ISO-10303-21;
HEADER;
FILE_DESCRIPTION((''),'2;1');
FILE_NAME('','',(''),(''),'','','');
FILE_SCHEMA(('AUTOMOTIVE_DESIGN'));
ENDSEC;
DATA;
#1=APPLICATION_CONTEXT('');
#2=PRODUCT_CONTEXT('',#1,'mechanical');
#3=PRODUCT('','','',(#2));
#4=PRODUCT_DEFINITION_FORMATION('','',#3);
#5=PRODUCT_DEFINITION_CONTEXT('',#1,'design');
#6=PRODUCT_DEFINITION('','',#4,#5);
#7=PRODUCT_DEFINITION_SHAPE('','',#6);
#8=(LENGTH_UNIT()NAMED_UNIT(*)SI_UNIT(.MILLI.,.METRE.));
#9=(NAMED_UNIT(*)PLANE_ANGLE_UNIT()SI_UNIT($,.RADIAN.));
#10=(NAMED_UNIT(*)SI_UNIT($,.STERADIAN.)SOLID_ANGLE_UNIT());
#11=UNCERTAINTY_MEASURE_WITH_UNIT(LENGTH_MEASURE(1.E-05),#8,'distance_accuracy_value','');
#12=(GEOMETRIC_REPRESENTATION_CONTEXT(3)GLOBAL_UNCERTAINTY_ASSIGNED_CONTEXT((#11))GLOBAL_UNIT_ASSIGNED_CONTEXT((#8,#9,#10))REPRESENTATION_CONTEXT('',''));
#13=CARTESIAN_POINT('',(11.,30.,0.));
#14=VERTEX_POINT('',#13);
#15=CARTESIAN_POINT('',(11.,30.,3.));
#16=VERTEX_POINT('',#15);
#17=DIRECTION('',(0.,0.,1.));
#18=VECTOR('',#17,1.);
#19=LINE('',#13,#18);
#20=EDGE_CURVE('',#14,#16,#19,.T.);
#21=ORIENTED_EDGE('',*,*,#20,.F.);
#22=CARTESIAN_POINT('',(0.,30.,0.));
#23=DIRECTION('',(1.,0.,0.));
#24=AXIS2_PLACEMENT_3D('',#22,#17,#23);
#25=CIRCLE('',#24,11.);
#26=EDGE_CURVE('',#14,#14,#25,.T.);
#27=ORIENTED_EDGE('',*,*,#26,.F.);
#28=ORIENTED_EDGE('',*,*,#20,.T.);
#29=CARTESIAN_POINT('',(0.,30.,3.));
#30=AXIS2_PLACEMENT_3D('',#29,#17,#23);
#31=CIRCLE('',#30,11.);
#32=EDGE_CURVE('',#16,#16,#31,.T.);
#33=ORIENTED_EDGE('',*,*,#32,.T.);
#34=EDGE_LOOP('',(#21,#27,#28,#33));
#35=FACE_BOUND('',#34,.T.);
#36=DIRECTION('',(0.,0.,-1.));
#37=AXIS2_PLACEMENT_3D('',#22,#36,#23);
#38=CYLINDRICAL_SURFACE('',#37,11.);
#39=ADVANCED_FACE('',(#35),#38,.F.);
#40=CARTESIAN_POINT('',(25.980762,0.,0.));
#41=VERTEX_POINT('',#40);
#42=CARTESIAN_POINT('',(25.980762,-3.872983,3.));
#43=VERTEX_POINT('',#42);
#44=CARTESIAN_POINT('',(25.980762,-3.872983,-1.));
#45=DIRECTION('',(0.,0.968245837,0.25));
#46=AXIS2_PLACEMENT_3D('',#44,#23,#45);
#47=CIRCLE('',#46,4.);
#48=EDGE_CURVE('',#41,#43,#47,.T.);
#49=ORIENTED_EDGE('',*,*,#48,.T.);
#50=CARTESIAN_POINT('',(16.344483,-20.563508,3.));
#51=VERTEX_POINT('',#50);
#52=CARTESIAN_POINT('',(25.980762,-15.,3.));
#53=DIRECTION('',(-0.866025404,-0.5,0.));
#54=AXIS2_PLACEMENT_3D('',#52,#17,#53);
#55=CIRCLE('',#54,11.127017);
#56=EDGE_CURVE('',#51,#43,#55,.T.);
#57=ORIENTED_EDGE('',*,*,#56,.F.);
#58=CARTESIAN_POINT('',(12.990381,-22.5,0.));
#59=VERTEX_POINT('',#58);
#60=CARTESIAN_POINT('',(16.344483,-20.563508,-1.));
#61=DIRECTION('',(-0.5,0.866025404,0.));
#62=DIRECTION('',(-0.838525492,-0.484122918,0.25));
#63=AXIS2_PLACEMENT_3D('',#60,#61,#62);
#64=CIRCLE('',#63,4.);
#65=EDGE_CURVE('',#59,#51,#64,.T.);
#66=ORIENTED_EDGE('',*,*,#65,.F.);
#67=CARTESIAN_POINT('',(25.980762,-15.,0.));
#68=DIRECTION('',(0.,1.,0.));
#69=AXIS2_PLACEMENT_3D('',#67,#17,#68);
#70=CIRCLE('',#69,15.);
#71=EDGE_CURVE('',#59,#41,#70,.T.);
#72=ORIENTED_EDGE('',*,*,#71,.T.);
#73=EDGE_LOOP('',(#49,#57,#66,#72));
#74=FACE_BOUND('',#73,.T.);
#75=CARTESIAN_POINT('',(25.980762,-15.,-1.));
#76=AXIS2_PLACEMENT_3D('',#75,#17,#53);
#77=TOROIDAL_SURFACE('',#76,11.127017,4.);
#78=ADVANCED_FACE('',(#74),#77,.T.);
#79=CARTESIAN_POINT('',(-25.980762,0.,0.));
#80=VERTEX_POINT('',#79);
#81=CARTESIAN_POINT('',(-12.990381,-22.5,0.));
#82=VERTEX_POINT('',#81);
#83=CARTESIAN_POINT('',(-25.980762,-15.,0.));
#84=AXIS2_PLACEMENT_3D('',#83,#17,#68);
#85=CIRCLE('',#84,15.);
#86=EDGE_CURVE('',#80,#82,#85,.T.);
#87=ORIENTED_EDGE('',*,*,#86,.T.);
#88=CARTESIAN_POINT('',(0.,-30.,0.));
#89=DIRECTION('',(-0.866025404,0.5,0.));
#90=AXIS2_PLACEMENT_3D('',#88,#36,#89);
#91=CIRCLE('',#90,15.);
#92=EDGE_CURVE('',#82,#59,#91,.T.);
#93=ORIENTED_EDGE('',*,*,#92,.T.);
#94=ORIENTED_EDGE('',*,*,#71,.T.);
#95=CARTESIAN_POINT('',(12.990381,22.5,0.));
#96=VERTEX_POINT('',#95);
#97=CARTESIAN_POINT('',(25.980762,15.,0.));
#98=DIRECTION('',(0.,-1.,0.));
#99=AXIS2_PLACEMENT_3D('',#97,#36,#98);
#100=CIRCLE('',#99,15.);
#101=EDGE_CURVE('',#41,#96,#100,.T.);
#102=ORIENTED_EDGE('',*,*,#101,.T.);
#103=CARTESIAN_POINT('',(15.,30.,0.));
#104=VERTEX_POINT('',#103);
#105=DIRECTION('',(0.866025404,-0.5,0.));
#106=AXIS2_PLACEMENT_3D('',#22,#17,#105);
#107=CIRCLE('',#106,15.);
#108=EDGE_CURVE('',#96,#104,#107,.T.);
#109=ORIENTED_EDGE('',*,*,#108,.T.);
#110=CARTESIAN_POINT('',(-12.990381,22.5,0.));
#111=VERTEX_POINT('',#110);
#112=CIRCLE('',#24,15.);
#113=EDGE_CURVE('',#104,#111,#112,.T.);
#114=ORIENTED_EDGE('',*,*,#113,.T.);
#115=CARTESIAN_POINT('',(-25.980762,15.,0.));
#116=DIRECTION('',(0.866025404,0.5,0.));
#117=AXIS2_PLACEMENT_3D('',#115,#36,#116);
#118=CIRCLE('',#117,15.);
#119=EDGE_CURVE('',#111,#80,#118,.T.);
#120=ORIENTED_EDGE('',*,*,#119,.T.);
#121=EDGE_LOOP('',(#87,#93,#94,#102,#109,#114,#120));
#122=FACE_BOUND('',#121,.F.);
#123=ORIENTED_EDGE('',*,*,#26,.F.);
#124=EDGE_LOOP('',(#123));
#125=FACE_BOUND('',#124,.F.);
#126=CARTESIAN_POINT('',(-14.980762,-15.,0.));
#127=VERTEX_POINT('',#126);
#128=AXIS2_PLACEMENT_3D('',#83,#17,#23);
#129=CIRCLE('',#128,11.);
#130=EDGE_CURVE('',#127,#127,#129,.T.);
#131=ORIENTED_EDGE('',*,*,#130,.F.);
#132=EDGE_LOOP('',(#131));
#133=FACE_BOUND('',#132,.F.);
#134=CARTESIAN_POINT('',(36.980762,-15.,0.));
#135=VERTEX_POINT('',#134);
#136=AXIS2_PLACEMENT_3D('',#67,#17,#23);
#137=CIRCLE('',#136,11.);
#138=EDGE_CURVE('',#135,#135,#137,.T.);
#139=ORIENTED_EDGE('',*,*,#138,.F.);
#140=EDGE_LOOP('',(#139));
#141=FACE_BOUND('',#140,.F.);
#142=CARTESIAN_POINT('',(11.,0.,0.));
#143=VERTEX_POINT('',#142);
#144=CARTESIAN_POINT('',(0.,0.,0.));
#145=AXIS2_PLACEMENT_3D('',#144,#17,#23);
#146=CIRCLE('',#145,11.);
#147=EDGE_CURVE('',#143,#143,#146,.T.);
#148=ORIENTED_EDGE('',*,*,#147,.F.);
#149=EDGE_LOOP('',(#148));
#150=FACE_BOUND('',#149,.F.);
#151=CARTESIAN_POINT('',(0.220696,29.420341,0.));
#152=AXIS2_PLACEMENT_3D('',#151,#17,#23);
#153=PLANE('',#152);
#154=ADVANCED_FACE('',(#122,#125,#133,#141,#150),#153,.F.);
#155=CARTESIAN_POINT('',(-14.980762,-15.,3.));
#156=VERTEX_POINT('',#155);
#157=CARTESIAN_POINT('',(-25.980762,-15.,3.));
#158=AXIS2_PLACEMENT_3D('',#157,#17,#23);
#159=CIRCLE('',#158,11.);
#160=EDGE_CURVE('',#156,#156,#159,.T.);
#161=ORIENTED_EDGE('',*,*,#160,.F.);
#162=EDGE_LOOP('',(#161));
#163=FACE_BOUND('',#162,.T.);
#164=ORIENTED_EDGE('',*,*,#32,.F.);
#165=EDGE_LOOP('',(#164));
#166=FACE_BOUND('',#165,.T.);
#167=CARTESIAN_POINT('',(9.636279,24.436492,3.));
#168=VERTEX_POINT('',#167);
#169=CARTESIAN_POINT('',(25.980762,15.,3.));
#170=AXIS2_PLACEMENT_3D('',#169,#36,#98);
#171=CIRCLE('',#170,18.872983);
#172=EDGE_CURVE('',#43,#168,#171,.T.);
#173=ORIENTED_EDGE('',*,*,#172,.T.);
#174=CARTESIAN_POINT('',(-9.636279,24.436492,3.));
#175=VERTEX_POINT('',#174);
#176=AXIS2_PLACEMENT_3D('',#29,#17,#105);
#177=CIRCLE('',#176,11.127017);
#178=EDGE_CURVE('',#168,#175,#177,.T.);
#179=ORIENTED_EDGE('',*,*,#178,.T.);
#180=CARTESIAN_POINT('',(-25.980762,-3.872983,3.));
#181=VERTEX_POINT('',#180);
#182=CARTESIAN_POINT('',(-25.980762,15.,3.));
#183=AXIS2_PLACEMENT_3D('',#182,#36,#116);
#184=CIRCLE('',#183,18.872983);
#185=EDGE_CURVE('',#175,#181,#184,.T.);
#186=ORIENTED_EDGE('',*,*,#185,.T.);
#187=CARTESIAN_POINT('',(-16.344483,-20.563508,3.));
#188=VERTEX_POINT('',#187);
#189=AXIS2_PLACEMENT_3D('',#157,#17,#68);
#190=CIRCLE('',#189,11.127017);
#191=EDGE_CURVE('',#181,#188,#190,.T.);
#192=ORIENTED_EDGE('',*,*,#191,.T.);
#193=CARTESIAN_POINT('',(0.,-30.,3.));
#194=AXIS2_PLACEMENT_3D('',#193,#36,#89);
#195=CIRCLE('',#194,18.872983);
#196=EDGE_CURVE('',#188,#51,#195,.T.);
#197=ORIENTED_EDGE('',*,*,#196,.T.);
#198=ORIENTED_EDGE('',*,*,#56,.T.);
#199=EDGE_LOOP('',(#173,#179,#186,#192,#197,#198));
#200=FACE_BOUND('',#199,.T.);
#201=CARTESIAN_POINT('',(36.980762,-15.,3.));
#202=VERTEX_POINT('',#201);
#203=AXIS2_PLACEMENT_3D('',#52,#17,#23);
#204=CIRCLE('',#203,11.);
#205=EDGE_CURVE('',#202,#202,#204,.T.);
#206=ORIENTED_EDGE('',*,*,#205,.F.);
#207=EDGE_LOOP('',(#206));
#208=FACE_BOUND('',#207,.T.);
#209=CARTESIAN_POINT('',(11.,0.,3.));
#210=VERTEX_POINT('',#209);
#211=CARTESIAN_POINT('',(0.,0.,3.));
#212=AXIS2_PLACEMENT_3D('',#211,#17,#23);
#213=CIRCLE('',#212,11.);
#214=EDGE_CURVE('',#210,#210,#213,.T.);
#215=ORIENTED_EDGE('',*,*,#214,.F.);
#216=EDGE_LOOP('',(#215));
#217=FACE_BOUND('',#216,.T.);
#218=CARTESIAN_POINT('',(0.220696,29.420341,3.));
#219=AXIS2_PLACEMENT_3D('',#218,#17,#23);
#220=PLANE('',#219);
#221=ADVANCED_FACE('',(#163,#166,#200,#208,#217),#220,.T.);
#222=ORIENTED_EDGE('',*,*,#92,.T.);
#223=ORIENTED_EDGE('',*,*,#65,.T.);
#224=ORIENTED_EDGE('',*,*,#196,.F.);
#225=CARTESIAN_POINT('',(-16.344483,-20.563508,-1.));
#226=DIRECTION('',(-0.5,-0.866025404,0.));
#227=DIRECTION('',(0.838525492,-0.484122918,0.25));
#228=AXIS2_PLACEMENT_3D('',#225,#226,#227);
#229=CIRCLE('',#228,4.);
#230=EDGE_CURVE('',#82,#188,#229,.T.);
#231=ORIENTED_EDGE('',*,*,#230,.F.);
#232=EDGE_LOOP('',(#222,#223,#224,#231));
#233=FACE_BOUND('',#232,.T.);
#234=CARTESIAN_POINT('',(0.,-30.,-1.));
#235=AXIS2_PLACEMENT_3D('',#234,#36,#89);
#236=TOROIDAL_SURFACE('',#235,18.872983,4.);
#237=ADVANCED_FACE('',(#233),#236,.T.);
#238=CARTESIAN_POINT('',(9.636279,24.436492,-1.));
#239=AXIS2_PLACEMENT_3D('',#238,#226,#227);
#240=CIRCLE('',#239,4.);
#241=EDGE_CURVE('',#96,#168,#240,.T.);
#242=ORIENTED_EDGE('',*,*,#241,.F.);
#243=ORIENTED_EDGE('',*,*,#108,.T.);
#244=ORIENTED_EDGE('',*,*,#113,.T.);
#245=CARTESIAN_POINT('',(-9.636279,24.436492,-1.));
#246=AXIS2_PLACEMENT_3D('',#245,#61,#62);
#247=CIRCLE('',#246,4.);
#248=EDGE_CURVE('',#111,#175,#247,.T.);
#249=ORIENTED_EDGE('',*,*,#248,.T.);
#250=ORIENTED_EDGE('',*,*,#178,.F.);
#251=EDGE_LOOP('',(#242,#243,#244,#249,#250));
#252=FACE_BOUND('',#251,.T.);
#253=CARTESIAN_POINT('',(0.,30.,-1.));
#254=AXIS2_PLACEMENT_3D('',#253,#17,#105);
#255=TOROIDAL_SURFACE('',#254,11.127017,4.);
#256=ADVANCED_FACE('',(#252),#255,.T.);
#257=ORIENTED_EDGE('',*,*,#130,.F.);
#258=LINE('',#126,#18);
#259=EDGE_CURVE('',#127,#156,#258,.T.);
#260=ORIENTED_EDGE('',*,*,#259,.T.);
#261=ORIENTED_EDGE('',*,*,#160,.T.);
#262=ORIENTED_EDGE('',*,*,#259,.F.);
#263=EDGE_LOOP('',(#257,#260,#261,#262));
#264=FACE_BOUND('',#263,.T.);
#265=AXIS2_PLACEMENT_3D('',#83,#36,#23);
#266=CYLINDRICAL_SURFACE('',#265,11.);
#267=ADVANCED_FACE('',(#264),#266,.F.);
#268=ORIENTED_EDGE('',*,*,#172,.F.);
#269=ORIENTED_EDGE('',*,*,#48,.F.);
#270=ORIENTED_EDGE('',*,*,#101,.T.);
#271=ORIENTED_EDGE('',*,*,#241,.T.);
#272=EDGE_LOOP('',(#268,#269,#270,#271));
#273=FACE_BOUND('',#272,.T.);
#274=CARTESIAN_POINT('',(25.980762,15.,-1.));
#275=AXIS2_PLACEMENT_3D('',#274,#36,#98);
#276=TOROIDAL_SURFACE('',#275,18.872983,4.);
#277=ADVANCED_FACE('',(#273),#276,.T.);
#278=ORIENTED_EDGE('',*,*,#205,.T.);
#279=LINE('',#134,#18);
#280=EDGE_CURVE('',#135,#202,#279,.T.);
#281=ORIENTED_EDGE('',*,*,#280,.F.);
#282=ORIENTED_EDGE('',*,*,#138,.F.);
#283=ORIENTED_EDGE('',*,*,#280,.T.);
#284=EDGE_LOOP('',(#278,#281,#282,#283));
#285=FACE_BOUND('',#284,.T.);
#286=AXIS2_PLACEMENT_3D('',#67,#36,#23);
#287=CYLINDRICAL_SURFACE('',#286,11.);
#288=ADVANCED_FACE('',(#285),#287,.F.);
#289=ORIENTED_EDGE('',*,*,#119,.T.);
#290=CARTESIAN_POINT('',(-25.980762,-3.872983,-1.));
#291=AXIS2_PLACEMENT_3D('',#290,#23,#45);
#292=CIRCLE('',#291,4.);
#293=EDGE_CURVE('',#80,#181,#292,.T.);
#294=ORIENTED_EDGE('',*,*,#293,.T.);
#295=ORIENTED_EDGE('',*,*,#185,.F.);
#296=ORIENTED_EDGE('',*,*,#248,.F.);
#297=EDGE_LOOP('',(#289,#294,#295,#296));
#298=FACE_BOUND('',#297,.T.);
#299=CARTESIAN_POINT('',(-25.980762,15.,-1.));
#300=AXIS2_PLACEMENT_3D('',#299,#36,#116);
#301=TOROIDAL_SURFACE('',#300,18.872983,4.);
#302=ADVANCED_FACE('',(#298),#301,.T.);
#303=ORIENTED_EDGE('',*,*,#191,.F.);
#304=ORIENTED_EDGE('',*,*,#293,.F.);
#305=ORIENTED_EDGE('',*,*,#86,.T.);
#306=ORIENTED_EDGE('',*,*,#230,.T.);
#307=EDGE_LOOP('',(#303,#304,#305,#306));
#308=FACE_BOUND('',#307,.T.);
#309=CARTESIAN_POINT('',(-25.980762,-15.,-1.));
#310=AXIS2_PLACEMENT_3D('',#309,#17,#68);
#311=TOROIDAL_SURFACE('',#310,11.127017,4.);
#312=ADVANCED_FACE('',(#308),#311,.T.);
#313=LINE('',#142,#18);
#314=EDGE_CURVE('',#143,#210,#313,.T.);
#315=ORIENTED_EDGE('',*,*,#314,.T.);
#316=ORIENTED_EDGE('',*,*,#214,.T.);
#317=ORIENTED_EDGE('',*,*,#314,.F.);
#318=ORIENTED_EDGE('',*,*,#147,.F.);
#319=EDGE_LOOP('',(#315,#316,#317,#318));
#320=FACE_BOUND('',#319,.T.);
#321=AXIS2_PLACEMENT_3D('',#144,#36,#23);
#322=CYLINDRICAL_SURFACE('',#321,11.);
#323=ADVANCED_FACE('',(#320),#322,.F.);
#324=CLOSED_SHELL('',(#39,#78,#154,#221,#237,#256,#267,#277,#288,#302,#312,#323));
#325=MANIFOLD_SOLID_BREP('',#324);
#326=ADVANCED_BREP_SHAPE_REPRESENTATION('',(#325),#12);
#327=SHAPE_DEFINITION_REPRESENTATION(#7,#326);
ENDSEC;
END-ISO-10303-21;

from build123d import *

# Parameters (mm, degrees)
F0_R         = 11
F1_DEPTH     = 3
F2_T2_ANGLE  = 120
F2_T4_ANGLE  = 240
F2_T6_ANGLE  = 240
F2_T8_ANGLE  = 120
F2_T10_ANGLE = 240
F2_T12_ANGLE = 120


# Not quite as in the source:
# - a fillet or chamfer that OpenCascade refuses, or shapes differently, is made with other operations: its cross-section is extruded or revolved along the edge and cut away or added


with BuildPart() as f1:
    # F0 (on Top) → F1 (new body)
    with BuildSketch(Plane.XY):
        with BuildLine():
            ThreePointArc((12.9903810568, 22.5), (14.4888873943, 26.1177143235), (15, 30))
            ThreePointArc((15, 30), (-3.8822856765, 44.4888873943), (-12.9903810568, 22.5))
            ThreePointArc((-12.9903810568, 22.5), (0, 15), (12.9903810568, 22.5))
        make_face()
        with Locations((0, 30)):
            Circle(F0_R, mode=Mode.SUBTRACT)
        with BuildLine():
            ThreePointArc((12.9903810568, 22.5), (0, 15), (-12.9903810568, 22.5))
            ThreePointArc((-12.9903810568, 22.5), (-12.9903810568, 7.5), (-25.9807621135, 0))
            ThreePointArc((-25.9807621135, 0), (-15.3741603957, -4.3933982822), (-10.9807621135, -15))
            ThreePointArc((-10.9807621135, -15), (-11.4918747192, -18.8822856765), (-12.9903810568, -22.5))
            ThreePointArc((-12.9903810568, -22.5), (0, -15), (12.9903810568, -22.5))
            ThreePointArc((12.9903810568, -22.5), (12.9903810568, -7.5), (25.9807621135, 0))
            ThreePointArc((25.9807621135, 0), (12.9903810568, 7.5), (12.9903810568, 22.5))
        make_face()
        Circle(F0_R, mode=Mode.SUBTRACT)
        with BuildLine():
            ThreePointArc((-10.9807621135, -15), (-15.3741603957, -4.3933982822), (-25.9807621135, 0))
            ThreePointArc((-25.9807621135, 0), (-38.9711431703, -22.5), (-12.9903810568, -22.5))
            ThreePointArc((-12.9903810568, -22.5), (-11.4918747192, -18.8822856765), (-10.9807621135, -15))
        make_face()
        with Locations((-25.9807621135, -15)):
            Circle(F0_R, mode=Mode.SUBTRACT)
        with BuildLine():
            ThreePointArc((40.9807621135, -15), (36.5873638313, -4.3933982822), (25.9807621135, 0))
            ThreePointArc((25.9807621135, 0), (12.9903810568, -7.5), (12.9903810568, -22.5))
            ThreePointArc((12.9903810568, -22.5), (29.8630477901, -29.4888873943), (40.9807621135, -15))
        make_face()
        with Locations((25.9807621135, -15)):
            Circle(F0_R, mode=Mode.SUBTRACT)
    extrude(amount=F1_DEPTH)

    # F2: fillet of radius 4 on 1 edges, made by hand

    # F2_s1 → F2_t2 (revolve, cut)
    with BuildSketch(Plane(origin=(-12.9903810568, 22.5, 0), x_dir=(0, 0, 1), z_dir=(-0.5, 0.8660254038, 0))):
        with BuildLine():
            ThreePointArc((0, 0), (2.1622776602, 1.4234936034), (3, 3.8729833462))
            Line((3, 3.8729833462), (3, 0))
            Line((3, 0), (0, 0))
        make_face()
    revolve(axis=Axis((-25.9807621135, 15, 3), (0, 0, -1)), revolution_arc=F2_T2_ANGLE, mode=Mode.SUBTRACT)

    # F2_s3 → F2_t4 (revolve, cut)
    with BuildSketch(Plane(origin=(12.9903810568, 22.5, 0), x_dir=(0, 0, 1), z_dir=(-0.5, -0.8660254038, 0))):
        with BuildLine():
            ThreePointArc((0, 0), (2.1622776602, 1.4234936034), (3, 3.8729833462))
            Line((3, 3.8729833462), (3, 0))
            Line((3, 0), (0, 0))
        make_face()
    revolve(axis=Axis((0, 30, 3), (0, 0, 1)), revolution_arc=F2_T4_ANGLE, mode=Mode.SUBTRACT)

    # F2_s5 → F2_t6 (revolve, cut)
    with BuildSketch(Plane.YZ.offset(-25.9807621135)):
        with BuildLine():
            ThreePointArc((0, 0), (-1.4234936034, 2.1622776602), (-3.8729833462, 3))
            Line((-3.8729833462, 3), (0, 3))
            Line((0, 3), (0, 0))
        make_face()
    revolve(axis=Axis((-25.9807621135, -15, 3), (0, 0, 1)), revolution_arc=F2_T6_ANGLE, mode=Mode.SUBTRACT)

    # F2_s7 → F2_t8 (revolve, cut)
    with BuildSketch(Plane(origin=(-12.9903810568, -22.5, 0), x_dir=(0, 0, 1), z_dir=(-0.5, -0.8660254038, 0))):
        with BuildLine():
            ThreePointArc((0, 0), (2.1622776602, 1.4234936034), (3, 3.8729833462))
            Line((3, 3.8729833462), (3, 0))
            Line((3, 0), (0, 0))
        make_face()
    revolve(axis=Axis((0, -30, 3), (0, 0, -1)), revolution_arc=F2_T8_ANGLE, mode=Mode.SUBTRACT)

    # F2_s9 → F2_t10 (revolve, cut)
    with BuildSketch(Plane(origin=(12.9903810568, -22.5, 0), x_dir=(0, 0, 1), z_dir=(-0.5, 0.8660254038, 0))):
        with BuildLine():
            ThreePointArc((0, 0), (2.1622776602, 1.4234936034), (3, 3.8729833462))
            Line((3, 3.8729833462), (3, 0))
            Line((3, 0), (0, 0))
        make_face()
    revolve(axis=Axis((25.9807621135, -15, 3), (0, 0, 1)), revolution_arc=F2_T10_ANGLE, mode=Mode.SUBTRACT)

    # F2_s11 → F2_t12 (revolve, cut)
    with BuildSketch(Plane.YZ.offset(25.9807621135)):
        with BuildLine():
            ThreePointArc((0, 0), (-1.4234936034, 2.1622776602), (-3.8729833462, 3))
            Line((-3.8729833462, 3), (0, 3))
            Line((0, 3), (0, 0))
        make_face()
    revolve(axis=Axis((25.9807621135, 15, 3), (0, 0, -1)), revolution_arc=F2_T12_ANGLE, mode=Mode.SUBTRACT)


solid = f1.part
